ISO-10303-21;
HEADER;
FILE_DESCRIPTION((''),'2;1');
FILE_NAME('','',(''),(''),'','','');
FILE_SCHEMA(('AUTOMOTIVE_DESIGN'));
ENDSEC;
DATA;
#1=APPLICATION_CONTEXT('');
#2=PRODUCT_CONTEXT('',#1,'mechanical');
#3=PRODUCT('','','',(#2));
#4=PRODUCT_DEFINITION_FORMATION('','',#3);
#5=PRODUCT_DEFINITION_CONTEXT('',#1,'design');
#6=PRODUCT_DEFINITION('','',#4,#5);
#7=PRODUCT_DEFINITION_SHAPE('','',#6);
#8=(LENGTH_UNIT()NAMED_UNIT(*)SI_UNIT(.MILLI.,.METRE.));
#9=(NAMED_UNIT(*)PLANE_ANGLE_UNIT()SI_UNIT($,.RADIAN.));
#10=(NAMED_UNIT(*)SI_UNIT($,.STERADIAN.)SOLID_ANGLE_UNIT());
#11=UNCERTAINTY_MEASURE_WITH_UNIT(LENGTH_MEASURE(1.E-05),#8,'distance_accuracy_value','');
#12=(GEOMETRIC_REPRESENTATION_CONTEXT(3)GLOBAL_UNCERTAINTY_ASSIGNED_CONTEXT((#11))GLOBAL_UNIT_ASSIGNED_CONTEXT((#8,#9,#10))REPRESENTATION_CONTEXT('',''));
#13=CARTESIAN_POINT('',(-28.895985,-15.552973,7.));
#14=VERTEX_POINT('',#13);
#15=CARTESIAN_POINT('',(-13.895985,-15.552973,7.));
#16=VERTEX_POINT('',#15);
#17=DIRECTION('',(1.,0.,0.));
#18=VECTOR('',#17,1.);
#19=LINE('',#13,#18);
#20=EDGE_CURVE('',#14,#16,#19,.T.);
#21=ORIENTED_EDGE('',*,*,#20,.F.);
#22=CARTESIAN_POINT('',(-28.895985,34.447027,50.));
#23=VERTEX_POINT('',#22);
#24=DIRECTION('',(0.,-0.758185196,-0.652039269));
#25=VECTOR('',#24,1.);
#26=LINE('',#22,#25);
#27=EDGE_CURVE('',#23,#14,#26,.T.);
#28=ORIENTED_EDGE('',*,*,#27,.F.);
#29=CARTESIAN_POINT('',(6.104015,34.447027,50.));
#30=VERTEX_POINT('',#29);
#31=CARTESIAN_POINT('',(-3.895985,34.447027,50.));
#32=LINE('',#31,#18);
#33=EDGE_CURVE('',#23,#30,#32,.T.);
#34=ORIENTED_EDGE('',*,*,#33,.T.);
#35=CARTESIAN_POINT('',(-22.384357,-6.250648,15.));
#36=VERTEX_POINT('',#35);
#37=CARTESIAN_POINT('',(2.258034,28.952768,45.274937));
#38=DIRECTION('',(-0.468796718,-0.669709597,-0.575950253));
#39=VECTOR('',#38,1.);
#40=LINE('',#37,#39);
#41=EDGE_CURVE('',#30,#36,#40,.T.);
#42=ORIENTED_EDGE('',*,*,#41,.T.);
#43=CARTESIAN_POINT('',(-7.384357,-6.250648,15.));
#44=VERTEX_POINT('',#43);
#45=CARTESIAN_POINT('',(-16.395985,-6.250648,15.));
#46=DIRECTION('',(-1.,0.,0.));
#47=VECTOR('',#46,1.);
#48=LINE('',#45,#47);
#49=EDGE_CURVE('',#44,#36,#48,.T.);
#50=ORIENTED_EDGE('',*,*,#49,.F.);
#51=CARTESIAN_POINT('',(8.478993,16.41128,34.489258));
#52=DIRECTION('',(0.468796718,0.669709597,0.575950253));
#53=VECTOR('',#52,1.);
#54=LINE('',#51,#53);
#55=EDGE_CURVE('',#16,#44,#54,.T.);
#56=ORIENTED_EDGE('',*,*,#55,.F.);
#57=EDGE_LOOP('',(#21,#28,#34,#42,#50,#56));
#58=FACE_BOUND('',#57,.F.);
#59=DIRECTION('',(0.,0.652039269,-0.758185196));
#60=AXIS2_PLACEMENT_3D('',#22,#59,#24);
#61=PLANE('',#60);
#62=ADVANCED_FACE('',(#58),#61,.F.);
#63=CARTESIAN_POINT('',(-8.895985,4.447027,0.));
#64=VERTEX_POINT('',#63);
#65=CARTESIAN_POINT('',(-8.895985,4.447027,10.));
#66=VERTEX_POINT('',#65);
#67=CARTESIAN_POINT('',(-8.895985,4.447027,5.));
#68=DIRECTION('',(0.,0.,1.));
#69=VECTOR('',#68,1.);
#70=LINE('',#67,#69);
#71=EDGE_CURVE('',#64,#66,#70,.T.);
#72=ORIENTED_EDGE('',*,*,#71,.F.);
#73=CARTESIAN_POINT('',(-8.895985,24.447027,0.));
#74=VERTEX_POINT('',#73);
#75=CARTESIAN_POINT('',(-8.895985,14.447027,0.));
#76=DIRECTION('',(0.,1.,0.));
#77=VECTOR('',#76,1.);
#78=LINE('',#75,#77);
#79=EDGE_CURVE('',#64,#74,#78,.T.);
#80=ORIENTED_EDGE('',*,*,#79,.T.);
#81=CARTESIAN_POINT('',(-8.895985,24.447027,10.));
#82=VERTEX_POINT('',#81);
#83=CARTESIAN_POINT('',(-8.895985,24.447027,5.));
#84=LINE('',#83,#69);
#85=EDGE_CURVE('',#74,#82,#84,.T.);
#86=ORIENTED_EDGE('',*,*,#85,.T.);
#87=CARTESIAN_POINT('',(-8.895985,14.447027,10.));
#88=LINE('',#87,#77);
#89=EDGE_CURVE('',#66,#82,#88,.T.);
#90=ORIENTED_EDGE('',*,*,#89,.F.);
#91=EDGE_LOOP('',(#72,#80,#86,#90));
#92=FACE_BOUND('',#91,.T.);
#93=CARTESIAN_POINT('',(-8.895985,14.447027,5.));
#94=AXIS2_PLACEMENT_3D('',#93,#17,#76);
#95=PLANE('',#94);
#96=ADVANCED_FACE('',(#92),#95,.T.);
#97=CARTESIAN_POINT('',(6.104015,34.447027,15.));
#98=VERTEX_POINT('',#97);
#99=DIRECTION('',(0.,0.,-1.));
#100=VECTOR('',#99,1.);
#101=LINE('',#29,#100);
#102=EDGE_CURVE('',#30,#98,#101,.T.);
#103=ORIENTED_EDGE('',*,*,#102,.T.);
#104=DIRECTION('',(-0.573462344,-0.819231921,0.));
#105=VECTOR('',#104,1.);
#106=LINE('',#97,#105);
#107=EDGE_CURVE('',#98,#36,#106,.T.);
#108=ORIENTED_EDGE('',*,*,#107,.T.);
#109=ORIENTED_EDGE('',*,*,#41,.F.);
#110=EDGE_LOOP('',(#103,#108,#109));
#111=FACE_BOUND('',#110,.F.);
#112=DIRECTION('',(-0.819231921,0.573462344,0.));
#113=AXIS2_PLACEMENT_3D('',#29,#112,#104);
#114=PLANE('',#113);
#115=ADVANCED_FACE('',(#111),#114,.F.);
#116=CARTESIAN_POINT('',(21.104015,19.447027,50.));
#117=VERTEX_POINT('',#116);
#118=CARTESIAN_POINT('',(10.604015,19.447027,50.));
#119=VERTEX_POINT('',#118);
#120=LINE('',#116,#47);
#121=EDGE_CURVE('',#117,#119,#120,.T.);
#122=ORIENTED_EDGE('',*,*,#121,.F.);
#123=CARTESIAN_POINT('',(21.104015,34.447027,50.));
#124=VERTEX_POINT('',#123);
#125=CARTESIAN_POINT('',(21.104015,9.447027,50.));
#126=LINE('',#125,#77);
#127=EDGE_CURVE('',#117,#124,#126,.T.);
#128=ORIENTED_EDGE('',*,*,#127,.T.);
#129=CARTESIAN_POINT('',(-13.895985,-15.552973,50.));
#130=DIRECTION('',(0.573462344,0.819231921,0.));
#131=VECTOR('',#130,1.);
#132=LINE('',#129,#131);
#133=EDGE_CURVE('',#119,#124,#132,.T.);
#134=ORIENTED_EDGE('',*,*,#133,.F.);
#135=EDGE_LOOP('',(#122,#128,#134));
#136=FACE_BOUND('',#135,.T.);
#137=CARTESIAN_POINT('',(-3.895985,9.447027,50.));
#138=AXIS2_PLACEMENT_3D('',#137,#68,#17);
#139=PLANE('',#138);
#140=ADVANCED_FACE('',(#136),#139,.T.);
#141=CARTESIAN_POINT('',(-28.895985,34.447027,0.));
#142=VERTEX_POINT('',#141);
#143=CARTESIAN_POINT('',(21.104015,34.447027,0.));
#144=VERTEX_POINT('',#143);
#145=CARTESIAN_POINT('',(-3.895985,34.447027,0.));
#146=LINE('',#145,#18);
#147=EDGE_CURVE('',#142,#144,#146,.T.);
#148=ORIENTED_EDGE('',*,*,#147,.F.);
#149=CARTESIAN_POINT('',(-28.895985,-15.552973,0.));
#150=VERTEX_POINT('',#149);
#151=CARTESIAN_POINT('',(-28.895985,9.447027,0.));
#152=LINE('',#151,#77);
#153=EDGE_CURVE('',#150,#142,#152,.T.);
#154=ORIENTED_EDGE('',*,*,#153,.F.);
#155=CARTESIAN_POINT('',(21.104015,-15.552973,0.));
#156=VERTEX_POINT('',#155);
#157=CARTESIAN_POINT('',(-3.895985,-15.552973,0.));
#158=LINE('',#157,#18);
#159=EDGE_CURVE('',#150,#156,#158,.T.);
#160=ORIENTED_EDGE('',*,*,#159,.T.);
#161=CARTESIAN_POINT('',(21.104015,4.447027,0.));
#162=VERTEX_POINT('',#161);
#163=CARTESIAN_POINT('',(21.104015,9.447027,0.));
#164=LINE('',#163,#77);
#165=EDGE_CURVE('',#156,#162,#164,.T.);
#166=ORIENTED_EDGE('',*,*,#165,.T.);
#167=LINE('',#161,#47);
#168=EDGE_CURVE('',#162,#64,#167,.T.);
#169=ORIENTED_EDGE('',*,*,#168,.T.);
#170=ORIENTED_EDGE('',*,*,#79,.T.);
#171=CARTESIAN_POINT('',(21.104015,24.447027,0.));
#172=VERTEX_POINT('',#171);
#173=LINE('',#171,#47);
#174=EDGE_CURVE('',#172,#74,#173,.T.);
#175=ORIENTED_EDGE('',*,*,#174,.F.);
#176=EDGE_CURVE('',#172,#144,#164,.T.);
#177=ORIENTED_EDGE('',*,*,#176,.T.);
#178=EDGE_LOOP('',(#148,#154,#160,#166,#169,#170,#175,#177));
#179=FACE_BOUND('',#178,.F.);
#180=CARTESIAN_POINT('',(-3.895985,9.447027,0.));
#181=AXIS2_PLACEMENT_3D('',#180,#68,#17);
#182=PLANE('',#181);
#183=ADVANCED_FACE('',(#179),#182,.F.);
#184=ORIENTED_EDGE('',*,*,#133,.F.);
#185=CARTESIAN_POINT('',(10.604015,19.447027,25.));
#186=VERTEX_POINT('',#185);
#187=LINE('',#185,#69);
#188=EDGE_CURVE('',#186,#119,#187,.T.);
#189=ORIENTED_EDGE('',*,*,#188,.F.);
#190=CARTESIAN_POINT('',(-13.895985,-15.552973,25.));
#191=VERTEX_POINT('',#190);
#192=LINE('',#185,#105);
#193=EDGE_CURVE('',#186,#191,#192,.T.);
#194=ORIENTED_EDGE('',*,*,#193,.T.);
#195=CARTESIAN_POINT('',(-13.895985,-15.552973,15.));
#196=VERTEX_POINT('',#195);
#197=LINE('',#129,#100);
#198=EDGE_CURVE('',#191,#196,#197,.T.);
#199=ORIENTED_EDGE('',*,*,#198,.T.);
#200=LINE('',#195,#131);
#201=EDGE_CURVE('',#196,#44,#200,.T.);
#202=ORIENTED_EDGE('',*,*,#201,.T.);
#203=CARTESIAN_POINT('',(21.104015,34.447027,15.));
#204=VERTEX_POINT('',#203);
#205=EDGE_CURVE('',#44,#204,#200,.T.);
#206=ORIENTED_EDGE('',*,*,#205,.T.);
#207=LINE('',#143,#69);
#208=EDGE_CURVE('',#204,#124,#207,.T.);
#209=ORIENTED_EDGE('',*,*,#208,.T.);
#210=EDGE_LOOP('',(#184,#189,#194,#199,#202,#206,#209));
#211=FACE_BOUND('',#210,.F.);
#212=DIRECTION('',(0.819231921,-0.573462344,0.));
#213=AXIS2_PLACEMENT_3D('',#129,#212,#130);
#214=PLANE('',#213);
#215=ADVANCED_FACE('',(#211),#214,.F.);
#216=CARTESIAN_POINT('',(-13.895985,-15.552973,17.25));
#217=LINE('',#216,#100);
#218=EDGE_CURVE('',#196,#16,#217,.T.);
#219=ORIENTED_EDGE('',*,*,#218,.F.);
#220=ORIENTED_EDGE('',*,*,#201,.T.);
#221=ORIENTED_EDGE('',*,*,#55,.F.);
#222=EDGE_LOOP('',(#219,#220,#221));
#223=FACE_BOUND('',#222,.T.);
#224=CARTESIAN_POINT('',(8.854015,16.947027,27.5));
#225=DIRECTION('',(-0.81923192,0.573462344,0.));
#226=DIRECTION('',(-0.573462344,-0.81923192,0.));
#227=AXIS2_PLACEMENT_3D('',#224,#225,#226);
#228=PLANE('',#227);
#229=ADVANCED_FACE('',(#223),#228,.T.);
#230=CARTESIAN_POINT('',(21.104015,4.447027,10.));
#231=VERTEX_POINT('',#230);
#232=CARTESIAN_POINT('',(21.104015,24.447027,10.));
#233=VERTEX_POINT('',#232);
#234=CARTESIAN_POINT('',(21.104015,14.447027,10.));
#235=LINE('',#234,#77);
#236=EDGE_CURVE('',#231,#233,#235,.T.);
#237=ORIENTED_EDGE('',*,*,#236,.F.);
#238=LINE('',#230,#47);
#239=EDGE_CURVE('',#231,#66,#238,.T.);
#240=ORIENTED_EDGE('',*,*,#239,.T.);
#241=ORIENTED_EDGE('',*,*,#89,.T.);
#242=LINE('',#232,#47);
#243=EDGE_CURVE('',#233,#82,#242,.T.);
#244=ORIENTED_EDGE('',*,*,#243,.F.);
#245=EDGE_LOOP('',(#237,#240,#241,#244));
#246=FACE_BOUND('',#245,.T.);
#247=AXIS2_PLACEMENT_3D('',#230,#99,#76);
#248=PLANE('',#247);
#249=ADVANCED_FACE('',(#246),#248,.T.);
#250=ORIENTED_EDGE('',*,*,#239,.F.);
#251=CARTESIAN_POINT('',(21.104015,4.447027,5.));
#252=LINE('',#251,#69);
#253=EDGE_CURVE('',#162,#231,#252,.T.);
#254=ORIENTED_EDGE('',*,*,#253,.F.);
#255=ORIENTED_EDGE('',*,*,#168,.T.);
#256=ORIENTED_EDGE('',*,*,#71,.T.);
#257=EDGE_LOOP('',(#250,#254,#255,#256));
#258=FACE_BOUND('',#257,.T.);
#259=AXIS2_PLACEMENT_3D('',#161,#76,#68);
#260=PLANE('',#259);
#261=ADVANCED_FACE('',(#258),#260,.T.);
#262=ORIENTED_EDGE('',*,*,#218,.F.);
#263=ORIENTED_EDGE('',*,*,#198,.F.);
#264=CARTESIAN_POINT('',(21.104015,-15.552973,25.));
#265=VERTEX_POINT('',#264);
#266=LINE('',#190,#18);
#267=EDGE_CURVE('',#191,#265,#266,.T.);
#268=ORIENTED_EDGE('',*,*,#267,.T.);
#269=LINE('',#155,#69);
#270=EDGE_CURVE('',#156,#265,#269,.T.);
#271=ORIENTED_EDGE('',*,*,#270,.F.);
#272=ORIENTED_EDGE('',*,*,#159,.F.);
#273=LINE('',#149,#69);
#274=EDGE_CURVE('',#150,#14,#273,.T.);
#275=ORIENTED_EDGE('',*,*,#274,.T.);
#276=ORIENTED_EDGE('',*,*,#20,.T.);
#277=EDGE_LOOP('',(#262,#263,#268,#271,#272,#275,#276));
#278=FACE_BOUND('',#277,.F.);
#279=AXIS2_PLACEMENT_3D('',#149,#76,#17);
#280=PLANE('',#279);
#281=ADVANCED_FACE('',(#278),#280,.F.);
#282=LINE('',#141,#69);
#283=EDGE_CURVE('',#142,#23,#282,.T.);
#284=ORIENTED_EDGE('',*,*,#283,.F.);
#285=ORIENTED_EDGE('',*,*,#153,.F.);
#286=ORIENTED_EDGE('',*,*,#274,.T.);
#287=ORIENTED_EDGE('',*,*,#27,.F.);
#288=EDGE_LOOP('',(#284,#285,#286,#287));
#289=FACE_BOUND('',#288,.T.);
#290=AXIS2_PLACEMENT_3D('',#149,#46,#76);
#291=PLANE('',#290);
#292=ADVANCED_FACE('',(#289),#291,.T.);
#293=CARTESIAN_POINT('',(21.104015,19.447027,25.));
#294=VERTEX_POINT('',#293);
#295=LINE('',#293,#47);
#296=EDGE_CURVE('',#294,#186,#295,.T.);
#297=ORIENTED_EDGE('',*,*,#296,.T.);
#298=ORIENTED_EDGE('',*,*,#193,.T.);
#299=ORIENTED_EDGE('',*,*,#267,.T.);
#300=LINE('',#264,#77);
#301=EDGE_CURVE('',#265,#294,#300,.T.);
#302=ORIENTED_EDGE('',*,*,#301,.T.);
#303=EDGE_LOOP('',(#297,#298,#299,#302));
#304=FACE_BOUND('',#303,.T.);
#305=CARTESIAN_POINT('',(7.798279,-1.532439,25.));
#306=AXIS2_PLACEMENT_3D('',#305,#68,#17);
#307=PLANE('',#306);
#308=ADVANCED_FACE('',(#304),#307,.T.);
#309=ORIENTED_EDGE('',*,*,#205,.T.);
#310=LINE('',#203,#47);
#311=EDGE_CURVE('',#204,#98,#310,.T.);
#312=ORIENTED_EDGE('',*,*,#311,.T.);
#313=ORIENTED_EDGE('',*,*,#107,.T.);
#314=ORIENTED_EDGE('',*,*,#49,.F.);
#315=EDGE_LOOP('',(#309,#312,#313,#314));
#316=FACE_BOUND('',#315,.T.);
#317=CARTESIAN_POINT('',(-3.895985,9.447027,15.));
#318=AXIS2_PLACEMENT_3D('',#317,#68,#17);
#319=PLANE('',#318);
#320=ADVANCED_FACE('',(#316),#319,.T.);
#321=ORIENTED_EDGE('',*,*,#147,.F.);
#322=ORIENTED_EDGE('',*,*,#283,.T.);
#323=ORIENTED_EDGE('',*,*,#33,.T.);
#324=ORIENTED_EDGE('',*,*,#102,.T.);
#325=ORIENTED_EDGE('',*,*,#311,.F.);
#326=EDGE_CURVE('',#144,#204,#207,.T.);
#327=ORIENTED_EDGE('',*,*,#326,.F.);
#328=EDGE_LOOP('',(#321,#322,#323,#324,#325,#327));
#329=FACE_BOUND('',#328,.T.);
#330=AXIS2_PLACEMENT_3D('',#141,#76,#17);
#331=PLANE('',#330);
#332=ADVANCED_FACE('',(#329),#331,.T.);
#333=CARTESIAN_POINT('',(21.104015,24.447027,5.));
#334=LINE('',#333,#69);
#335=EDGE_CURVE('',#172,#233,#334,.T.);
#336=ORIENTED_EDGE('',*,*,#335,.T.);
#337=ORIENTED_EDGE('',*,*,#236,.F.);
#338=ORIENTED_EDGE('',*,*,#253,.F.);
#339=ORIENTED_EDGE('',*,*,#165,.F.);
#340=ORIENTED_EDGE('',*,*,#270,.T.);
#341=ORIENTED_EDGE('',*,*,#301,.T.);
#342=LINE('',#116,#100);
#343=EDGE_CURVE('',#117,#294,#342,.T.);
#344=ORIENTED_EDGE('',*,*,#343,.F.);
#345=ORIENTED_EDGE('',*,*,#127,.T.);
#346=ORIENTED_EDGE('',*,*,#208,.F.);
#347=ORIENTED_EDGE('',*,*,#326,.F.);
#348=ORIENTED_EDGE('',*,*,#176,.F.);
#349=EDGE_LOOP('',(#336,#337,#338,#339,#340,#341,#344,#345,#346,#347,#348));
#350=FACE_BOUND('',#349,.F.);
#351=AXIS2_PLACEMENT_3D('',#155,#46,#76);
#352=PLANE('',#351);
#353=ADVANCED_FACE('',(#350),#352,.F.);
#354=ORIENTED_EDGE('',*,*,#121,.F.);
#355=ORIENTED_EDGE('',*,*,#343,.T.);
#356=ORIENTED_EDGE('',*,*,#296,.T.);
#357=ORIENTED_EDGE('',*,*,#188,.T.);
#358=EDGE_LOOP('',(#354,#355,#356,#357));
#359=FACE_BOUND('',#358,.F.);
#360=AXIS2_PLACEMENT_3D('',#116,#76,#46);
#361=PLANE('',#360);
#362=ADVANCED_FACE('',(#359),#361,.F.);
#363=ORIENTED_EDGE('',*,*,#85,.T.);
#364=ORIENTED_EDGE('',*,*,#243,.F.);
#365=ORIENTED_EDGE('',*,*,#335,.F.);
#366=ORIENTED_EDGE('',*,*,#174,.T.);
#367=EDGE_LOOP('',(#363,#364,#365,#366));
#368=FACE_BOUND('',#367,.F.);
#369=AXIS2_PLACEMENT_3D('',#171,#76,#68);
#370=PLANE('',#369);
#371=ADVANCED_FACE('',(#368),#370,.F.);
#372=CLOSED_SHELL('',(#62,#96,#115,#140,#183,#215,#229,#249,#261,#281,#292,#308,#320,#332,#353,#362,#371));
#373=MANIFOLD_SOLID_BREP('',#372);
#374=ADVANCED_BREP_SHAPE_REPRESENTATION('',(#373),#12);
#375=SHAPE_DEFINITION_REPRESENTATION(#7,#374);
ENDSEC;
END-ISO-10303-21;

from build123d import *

# Parameters (mm, degrees)
F0_W      = 50
F0_H      = 50
F1_DEPTH  = 50
F2_W      = 20
F2_H      = 10
F4_DEPTH  = 30
F7_DEPTH  = 25
F9_DEPTH  = 35
F11_REACH = 115.9479483752


with BuildPart() as f1:
    # F0 (on Top) → F1 (new body)
    with BuildSketch(Plane.XY):
        with Locations((-3.8959849626, 9.4470265827)):
            Rectangle(F0_W, F0_H)
    extrude(amount=F1_DEPTH)

    # F2 (on face) → F4 (cut, through all)
    with BuildSketch(Plane.YZ.offset(21.1040150374)):
        with Locations((14.4470265827, 5)):
            Rectangle(F2_W, F2_H)
    extrude(amount=-F4_DEPTH, mode=Mode.SUBTRACT)

    # F5 (on face) → F7 (cut, through all)
    with BuildSketch(Plane.XY.offset(50)):
        Polygon((21.1040150374, 19.4470265827), (10.6040150374, 19.4470265827), (-13.8959849626, -15.5529734173), (21.1040150374, -15.5529734173), align=None)
    extrude(amount=-F7_DEPTH, mode=Mode.SUBTRACT)

    # F5 (on face) → F9 (cut, through all)
    with BuildSketch(Plane.XY.offset(50)):
        Polygon((10.6040150374, 19.4470265827), (21.1040150374, 34.4470265827), (6.1040150374, 34.4470265827), (-28.8959849626, -15.5529734173), (-13.8959849626, -15.5529734173), align=None)
    extrude(amount=-F9_DEPTH, mode=Mode.SUBTRACT)

    f11_end = Plane(origin=(8.8540150374, 16.9470265827, 27.5), x_dir=(-0.5734623444, -0.8192319205, 0), z_dir=(-0.8192319205, 0.5734623444, 0))
    # F10 (on face) → F11 (cut, up to a plane its end follows)
    with BuildSketch(Plane(origin=(-28.8959849626, 0, 0), x_dir=(0, -1, 0), z_dir=(-1, 0, 0))):
        Polygon((15.5529734173, 7), (15.5529734173, 50), (-34.4470265827, 50), align=None)
    f11_long = extrude(amount=-F11_REACH, mode=Mode.PRIVATE)
    add(split(f11_long, bisect_by=f11_end, keep=Keep.TOP, mode=Mode.PRIVATE), mode=Mode.SUBTRACT)


solid = f1.part
